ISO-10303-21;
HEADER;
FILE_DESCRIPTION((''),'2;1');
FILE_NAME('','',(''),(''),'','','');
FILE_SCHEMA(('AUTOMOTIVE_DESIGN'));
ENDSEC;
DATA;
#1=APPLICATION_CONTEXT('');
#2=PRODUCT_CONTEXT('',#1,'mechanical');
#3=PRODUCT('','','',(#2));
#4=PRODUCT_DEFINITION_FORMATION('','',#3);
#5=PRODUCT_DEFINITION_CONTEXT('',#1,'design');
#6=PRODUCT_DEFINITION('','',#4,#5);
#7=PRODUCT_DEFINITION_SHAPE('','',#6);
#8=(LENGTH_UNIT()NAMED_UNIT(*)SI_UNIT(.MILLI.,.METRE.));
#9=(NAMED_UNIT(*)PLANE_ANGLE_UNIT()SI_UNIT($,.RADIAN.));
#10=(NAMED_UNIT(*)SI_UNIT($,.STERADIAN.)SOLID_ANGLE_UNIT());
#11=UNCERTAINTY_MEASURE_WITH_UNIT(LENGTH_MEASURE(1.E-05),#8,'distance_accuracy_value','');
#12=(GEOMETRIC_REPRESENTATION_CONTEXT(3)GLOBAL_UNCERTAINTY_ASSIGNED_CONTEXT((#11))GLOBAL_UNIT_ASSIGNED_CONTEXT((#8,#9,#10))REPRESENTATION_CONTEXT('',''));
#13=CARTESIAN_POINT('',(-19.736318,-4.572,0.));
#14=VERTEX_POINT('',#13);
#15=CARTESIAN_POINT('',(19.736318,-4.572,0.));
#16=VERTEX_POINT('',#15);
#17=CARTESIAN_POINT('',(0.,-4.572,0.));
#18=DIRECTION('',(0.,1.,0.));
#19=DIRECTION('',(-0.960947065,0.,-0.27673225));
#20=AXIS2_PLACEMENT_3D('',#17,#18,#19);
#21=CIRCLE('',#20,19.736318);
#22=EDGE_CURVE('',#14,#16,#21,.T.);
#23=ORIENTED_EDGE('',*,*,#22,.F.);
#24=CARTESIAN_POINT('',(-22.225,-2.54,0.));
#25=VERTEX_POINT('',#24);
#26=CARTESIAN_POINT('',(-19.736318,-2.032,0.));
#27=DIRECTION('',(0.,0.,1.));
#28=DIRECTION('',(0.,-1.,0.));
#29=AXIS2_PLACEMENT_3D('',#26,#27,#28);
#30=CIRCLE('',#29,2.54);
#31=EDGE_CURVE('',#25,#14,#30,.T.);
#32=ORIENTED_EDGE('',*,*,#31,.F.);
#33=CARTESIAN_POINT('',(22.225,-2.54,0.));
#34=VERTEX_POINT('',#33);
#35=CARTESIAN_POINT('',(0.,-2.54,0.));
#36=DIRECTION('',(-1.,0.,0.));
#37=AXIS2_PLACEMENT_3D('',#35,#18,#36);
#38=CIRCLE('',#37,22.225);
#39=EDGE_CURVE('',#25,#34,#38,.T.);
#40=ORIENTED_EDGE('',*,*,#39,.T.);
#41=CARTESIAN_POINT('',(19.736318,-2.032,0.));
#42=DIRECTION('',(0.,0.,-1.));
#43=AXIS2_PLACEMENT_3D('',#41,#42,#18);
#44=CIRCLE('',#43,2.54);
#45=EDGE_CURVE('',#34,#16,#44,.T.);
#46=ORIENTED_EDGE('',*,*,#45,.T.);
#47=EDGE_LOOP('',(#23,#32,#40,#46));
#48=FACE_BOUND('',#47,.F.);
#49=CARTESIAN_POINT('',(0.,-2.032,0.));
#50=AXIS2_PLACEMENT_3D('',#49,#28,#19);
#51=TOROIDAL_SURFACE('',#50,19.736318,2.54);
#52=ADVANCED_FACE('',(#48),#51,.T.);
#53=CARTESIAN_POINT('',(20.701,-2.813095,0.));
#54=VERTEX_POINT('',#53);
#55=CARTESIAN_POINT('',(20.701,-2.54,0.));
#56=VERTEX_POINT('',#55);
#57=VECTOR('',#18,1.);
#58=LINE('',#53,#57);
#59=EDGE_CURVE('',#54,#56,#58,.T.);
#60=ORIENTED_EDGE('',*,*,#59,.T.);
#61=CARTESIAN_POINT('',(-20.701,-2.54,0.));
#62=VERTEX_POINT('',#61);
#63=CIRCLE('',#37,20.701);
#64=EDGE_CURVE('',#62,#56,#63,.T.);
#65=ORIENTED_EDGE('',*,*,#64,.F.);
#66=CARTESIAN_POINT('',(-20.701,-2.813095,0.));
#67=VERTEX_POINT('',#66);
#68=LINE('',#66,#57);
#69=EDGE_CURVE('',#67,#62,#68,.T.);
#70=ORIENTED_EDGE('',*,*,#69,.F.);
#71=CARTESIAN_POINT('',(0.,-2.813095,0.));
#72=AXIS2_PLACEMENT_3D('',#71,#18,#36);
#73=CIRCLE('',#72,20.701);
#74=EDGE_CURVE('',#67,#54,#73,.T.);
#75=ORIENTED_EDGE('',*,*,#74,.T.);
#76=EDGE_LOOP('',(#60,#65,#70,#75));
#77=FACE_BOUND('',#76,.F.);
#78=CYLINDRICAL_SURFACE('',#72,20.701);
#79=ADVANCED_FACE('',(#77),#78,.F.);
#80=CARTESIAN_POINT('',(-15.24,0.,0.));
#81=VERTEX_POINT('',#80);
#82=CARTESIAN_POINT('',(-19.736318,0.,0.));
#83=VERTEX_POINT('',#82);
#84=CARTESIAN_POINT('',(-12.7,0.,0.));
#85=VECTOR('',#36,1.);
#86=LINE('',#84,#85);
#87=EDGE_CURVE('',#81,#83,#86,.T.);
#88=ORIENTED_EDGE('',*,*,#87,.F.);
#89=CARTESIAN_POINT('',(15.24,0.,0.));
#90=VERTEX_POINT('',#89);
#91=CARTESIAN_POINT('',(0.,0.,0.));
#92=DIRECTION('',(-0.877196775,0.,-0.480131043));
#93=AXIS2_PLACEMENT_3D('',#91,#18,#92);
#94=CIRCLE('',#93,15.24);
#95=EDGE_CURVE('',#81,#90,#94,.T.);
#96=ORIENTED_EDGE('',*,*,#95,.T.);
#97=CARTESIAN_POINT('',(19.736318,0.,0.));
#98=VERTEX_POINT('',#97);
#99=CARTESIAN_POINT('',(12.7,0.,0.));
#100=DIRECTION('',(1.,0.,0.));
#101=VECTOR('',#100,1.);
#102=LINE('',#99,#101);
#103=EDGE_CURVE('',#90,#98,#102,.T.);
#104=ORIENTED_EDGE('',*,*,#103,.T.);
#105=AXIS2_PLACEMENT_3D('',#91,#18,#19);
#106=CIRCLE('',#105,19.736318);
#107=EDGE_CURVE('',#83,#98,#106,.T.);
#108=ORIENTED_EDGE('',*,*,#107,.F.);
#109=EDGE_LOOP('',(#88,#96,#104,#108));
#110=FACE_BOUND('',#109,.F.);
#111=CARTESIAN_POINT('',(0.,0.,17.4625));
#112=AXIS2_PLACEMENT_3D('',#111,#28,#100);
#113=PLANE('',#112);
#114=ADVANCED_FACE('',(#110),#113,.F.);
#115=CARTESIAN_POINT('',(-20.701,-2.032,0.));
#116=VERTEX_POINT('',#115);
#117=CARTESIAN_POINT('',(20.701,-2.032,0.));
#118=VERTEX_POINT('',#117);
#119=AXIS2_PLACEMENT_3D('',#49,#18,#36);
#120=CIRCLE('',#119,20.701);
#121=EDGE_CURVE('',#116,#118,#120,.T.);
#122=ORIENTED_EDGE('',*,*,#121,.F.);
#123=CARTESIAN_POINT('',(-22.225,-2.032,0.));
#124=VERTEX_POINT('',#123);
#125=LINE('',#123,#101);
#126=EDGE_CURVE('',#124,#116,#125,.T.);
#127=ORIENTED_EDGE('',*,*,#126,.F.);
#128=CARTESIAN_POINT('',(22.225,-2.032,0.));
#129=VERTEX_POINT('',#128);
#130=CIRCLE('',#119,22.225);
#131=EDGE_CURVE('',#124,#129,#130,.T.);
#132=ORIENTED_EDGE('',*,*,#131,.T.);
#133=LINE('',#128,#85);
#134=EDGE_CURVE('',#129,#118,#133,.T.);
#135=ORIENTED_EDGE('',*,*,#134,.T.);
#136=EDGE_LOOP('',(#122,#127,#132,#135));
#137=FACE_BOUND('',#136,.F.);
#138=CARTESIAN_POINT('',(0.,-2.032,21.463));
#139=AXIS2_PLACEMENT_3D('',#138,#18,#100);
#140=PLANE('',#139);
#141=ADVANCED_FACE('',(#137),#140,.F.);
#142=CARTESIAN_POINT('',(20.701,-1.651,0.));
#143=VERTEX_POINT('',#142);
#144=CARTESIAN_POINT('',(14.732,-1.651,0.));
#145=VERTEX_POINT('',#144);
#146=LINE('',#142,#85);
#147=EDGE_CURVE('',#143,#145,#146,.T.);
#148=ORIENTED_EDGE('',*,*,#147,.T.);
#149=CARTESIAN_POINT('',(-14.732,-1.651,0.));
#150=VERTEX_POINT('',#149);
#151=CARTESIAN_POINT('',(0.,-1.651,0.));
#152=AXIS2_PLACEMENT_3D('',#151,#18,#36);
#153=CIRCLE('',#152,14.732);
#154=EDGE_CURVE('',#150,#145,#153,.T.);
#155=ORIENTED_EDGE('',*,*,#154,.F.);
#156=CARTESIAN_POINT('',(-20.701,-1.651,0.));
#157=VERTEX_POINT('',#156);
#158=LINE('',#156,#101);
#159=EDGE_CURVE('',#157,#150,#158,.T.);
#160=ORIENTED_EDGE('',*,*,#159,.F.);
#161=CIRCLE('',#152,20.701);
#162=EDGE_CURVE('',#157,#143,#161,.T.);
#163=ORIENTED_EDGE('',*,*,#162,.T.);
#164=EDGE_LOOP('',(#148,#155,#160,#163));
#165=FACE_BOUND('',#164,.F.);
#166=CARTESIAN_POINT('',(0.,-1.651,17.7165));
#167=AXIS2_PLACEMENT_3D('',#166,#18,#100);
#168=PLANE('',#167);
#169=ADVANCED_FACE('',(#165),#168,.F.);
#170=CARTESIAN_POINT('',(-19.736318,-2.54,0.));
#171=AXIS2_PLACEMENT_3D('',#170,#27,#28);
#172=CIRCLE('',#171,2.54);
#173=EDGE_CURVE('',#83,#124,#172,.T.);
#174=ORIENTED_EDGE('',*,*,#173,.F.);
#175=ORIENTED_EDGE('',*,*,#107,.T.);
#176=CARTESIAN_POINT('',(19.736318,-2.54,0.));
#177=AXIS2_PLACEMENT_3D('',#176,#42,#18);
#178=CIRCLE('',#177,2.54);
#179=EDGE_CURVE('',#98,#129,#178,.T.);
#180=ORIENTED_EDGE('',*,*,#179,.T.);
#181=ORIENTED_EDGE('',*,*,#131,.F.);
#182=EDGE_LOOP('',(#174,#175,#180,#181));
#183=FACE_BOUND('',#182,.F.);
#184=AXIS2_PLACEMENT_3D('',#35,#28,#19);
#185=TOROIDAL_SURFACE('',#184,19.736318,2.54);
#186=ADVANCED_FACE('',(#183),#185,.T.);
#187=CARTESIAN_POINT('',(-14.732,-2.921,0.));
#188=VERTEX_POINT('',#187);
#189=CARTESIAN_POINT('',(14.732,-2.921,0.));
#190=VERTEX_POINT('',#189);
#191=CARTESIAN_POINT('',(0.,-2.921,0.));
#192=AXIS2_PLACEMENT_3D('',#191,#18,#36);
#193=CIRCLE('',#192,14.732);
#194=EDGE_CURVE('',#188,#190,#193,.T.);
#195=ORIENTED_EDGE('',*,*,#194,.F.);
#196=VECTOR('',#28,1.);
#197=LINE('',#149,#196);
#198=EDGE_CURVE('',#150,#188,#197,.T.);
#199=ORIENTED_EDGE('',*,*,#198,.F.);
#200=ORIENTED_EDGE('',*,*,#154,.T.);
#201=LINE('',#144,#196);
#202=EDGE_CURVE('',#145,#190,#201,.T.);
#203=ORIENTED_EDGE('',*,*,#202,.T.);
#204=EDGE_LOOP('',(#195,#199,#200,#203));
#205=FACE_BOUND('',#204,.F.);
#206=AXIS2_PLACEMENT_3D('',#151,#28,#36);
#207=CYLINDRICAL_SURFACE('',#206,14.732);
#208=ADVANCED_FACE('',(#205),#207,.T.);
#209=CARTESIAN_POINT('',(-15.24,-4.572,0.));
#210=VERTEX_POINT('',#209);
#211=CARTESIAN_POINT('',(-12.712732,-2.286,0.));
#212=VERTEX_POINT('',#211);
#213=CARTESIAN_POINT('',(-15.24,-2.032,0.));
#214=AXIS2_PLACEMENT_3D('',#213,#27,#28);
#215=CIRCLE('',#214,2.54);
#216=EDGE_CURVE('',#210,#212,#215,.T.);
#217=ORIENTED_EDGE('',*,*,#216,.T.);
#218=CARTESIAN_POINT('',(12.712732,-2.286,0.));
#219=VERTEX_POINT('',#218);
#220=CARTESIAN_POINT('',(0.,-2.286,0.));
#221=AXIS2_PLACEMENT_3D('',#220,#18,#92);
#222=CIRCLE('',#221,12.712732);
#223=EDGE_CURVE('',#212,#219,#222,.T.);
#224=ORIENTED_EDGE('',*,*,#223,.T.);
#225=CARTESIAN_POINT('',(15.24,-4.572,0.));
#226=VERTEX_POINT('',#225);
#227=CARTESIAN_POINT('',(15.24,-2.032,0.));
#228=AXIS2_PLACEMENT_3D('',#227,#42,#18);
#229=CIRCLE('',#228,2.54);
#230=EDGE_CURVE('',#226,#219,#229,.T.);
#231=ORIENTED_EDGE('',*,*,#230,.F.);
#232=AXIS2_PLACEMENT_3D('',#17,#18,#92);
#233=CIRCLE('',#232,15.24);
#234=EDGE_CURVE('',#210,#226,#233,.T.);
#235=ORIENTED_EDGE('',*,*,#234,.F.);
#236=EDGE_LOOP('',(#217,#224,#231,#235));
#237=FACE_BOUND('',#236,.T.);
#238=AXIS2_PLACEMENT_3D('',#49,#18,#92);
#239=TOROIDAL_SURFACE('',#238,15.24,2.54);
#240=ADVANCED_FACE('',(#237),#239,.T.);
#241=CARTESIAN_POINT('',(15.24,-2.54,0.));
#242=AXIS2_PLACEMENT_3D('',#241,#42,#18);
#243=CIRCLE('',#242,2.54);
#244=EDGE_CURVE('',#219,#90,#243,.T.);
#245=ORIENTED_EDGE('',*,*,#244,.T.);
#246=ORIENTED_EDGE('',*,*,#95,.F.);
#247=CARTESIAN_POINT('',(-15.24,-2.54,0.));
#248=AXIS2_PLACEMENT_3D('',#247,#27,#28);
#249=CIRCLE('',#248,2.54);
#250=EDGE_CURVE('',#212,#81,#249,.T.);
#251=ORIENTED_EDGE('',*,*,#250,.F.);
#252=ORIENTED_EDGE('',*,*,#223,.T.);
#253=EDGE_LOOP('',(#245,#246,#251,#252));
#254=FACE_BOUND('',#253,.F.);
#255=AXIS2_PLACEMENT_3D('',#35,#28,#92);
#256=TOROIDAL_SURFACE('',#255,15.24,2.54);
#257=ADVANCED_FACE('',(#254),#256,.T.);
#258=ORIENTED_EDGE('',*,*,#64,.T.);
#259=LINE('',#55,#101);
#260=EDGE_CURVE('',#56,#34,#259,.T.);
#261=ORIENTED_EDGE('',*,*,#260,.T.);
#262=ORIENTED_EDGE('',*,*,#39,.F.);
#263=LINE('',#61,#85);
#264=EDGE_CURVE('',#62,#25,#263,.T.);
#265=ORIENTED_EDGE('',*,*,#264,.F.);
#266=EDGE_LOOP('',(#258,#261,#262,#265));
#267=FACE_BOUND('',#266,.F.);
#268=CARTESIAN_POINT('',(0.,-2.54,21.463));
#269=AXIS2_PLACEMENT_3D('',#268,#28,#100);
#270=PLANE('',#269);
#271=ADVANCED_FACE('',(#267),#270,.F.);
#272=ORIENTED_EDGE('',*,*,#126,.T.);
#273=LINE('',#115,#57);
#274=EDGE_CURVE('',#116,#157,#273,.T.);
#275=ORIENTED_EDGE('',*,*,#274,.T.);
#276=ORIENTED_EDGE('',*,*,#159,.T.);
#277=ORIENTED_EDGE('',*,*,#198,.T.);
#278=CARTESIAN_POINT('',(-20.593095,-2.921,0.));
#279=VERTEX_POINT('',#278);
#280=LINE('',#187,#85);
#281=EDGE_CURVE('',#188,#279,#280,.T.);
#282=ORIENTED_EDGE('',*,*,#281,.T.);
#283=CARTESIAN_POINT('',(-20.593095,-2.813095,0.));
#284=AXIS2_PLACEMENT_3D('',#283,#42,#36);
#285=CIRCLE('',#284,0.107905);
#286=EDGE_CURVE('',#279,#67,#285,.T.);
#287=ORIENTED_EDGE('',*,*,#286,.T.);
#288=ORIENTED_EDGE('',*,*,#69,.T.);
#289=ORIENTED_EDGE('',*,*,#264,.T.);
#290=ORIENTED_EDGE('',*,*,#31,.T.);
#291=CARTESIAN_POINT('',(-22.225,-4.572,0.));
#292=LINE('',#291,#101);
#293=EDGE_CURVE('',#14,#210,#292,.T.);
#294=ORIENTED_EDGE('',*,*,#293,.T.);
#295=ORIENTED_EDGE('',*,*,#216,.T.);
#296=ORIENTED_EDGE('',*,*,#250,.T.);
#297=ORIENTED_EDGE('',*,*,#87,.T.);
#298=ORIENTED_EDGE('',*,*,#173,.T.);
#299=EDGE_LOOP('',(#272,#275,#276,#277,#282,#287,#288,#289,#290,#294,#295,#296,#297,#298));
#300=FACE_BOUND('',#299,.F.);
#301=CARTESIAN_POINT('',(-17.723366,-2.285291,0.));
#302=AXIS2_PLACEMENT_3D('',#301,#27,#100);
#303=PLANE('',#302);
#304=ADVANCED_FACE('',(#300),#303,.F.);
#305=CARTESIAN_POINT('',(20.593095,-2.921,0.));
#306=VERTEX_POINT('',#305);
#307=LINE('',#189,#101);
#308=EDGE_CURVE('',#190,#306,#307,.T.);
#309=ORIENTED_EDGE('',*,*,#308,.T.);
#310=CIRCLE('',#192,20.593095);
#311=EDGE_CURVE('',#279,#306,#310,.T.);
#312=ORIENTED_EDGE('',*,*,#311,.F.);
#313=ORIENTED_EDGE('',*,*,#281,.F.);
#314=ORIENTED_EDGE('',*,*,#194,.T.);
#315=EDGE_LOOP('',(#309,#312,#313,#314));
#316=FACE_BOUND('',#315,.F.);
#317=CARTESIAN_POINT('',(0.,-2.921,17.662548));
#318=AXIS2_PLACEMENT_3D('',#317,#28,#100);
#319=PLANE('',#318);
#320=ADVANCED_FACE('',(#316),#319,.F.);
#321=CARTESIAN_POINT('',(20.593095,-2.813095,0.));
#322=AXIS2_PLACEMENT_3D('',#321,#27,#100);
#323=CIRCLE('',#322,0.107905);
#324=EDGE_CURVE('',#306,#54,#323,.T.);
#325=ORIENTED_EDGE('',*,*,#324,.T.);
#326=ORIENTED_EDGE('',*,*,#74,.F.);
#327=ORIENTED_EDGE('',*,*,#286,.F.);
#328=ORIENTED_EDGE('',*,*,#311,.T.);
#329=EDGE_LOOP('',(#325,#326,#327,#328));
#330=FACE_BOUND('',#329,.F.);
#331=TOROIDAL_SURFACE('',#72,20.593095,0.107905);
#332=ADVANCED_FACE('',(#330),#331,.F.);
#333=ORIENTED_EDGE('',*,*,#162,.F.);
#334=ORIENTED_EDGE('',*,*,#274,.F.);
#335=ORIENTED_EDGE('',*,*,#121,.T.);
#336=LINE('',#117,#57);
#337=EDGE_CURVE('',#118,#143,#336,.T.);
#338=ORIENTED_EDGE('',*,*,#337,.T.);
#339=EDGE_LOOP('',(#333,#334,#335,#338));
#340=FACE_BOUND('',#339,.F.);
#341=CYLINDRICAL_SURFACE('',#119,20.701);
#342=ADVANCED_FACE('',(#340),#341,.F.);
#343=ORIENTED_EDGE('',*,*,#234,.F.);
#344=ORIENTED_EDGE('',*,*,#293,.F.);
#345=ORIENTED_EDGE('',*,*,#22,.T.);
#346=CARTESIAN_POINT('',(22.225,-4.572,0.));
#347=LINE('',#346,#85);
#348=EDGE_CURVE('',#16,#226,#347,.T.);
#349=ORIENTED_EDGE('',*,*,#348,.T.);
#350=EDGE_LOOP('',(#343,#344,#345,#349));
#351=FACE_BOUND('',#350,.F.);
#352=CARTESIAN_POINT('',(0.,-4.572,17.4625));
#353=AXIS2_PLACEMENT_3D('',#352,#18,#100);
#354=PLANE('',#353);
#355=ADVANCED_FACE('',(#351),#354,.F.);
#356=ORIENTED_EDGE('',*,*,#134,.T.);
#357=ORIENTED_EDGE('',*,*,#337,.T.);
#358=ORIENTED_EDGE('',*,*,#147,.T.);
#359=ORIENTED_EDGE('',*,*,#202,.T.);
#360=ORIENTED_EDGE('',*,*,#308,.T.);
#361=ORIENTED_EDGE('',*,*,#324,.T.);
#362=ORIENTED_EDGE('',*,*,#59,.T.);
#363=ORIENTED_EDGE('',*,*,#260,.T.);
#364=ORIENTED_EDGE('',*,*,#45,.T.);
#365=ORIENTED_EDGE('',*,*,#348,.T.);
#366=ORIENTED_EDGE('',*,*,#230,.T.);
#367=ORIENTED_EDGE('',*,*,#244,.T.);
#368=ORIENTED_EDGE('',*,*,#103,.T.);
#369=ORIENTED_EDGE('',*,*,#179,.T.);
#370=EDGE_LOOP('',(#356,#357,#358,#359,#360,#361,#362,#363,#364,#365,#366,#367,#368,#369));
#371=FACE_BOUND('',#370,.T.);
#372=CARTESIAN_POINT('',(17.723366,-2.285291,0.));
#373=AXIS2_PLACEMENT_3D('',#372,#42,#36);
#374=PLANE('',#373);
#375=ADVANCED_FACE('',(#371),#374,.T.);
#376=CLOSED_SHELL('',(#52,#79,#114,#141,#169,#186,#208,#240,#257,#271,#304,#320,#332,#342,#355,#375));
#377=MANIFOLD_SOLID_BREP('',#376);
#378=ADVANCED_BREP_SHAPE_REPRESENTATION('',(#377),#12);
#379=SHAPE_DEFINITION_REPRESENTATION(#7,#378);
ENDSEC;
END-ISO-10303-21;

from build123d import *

# Parameters (mm, degrees)
F3_T2_ANGLE = 212.1305431318
F3_T4_ANGLE = 212.1305431318
F3_T6_ANGLE = 237.3879219603
F3_T8_ANGLE = 237.3879219603


# Not quite as in the source:
# - a fillet or chamfer that OpenCascade refuses, or shapes differently, is made with other operations: its cross-section is extruded or revolved along the edge and cut away or added


with BuildPart() as f2:
    # F2: sweep along a path in F0
    with BuildLine(Plane.XZ) as f2_path:
        ThreePointArc((-12.7, 0), (0, 12.7), (12.7, 0))
    # F1 (on Top) → F2 (sweep)
    with BuildSketch(Plane.XY):
        with BuildLine():
            Line((-12.7, -4.572), (-12.7, 0))
            Line((-12.7, 0), (-22.225, 0))
            Line((-22.225, 0), (-22.225, -2.032))
            Line((-22.225, -2.032), (-20.701, -2.032))
            Line((-20.701, -2.032), (-20.701, -1.651))
            Line((-20.701, -1.651), (-14.732, -1.651))
            Line((-14.732, -1.651), (-14.732, -2.921))
            Line((-14.732, -2.921), (-20.5930953096, -2.921))
            ThreePointArc((-20.5930953096, -2.921), (-20.6693954479, -2.8893954479), (-20.701, -2.8130953096))
            Line((-20.701, -2.8130953096), (-20.701, -2.54))
            Line((-20.701, -2.54), (-22.225, -2.54))
            Line((-22.225, -2.54), (-22.225, -4.572))
            Line((-22.225, -4.572), (-12.7, -4.572))
        make_face()
    sweep(path=f2_path.line)

    # F3: fillet of radius 2.54 on 4 edges, made by hand

    # F3_s1 → F3_t2 (revolve, cut)
    with BuildSketch(Plane(origin=(0, 0, 0), x_dir=(0, 1, 0), z_dir=(0.2767322496, 0, -0.9609470651))):
        with BuildLine():
            ThreePointArc((-2.54, -22.225), (-3.9994755399, -21.3427554727), (-4.572, -19.7363184213))
            Line((-4.572, -19.7363184213), (-4.572, -22.225))
            Line((-4.572, -22.225), (-2.54, -22.225))
        make_face()
    revolve(axis=Axis((0, -4.572, 0), (0, 1, 0)), revolution_arc=F3_T2_ANGLE, mode=Mode.SUBTRACT)

    # F3_s3 → F3_t4 (revolve, cut)
    with BuildSketch(Plane(origin=(0, 0, 0), x_dir=(0, 1, 0), z_dir=(0.2767322496, 0, -0.9609470651))):
        with BuildLine():
            ThreePointArc((0, -19.7363184213), (-0.5725244601, -21.3427554727), (-2.032, -22.225))
            Line((-2.032, -22.225), (0, -22.225))
            Line((0, -22.225), (0, -19.7363184213))
        make_face()
    revolve(axis=Axis((0, 0, 0), (0, 1, 0)), revolution_arc=F3_T4_ANGLE, mode=Mode.SUBTRACT)

    # F3_s5 → F3_t6 (revolve, cut)
    with BuildSketch(Plane(origin=(0, 0, 0), x_dir=(0, 1, 0), z_dir=(0.4801310429, 0, -0.8771967748))):
        with BuildLine():
            ThreePointArc((-2.032, -12.7), (-3.8280512242, -13.4439487758), (-4.572, -15.24))
            Line((-4.572, -15.24), (-4.572, -12.7))
            Line((-4.572, -12.7), (-2.032, -12.7))
        make_face()
    revolve(axis=Axis((0, -4.572, 0), (0, 1, 0)), revolution_arc=F3_T6_ANGLE, mode=Mode.SUBTRACT)

    # F3_s7 → F3_t8 (revolve, cut)
    with BuildSketch(Plane(origin=(0, 0, 0), x_dir=(0, 1, 0), z_dir=(0.4801310429, 0, -0.8771967748))):
        with BuildLine():
            ThreePointArc((-2.54, -12.7), (-0.7439487758, -13.4439487758), (0, -15.24))
            Line((0, -15.24), (0, -12.7))
            Line((0, -12.7), (-2.54, -12.7))
        make_face()
    revolve(axis=Axis((0, 0, 0), (0, 1, 0)), revolution_arc=F3_T8_ANGLE, mode=Mode.SUBTRACT)


solid = f2.part
